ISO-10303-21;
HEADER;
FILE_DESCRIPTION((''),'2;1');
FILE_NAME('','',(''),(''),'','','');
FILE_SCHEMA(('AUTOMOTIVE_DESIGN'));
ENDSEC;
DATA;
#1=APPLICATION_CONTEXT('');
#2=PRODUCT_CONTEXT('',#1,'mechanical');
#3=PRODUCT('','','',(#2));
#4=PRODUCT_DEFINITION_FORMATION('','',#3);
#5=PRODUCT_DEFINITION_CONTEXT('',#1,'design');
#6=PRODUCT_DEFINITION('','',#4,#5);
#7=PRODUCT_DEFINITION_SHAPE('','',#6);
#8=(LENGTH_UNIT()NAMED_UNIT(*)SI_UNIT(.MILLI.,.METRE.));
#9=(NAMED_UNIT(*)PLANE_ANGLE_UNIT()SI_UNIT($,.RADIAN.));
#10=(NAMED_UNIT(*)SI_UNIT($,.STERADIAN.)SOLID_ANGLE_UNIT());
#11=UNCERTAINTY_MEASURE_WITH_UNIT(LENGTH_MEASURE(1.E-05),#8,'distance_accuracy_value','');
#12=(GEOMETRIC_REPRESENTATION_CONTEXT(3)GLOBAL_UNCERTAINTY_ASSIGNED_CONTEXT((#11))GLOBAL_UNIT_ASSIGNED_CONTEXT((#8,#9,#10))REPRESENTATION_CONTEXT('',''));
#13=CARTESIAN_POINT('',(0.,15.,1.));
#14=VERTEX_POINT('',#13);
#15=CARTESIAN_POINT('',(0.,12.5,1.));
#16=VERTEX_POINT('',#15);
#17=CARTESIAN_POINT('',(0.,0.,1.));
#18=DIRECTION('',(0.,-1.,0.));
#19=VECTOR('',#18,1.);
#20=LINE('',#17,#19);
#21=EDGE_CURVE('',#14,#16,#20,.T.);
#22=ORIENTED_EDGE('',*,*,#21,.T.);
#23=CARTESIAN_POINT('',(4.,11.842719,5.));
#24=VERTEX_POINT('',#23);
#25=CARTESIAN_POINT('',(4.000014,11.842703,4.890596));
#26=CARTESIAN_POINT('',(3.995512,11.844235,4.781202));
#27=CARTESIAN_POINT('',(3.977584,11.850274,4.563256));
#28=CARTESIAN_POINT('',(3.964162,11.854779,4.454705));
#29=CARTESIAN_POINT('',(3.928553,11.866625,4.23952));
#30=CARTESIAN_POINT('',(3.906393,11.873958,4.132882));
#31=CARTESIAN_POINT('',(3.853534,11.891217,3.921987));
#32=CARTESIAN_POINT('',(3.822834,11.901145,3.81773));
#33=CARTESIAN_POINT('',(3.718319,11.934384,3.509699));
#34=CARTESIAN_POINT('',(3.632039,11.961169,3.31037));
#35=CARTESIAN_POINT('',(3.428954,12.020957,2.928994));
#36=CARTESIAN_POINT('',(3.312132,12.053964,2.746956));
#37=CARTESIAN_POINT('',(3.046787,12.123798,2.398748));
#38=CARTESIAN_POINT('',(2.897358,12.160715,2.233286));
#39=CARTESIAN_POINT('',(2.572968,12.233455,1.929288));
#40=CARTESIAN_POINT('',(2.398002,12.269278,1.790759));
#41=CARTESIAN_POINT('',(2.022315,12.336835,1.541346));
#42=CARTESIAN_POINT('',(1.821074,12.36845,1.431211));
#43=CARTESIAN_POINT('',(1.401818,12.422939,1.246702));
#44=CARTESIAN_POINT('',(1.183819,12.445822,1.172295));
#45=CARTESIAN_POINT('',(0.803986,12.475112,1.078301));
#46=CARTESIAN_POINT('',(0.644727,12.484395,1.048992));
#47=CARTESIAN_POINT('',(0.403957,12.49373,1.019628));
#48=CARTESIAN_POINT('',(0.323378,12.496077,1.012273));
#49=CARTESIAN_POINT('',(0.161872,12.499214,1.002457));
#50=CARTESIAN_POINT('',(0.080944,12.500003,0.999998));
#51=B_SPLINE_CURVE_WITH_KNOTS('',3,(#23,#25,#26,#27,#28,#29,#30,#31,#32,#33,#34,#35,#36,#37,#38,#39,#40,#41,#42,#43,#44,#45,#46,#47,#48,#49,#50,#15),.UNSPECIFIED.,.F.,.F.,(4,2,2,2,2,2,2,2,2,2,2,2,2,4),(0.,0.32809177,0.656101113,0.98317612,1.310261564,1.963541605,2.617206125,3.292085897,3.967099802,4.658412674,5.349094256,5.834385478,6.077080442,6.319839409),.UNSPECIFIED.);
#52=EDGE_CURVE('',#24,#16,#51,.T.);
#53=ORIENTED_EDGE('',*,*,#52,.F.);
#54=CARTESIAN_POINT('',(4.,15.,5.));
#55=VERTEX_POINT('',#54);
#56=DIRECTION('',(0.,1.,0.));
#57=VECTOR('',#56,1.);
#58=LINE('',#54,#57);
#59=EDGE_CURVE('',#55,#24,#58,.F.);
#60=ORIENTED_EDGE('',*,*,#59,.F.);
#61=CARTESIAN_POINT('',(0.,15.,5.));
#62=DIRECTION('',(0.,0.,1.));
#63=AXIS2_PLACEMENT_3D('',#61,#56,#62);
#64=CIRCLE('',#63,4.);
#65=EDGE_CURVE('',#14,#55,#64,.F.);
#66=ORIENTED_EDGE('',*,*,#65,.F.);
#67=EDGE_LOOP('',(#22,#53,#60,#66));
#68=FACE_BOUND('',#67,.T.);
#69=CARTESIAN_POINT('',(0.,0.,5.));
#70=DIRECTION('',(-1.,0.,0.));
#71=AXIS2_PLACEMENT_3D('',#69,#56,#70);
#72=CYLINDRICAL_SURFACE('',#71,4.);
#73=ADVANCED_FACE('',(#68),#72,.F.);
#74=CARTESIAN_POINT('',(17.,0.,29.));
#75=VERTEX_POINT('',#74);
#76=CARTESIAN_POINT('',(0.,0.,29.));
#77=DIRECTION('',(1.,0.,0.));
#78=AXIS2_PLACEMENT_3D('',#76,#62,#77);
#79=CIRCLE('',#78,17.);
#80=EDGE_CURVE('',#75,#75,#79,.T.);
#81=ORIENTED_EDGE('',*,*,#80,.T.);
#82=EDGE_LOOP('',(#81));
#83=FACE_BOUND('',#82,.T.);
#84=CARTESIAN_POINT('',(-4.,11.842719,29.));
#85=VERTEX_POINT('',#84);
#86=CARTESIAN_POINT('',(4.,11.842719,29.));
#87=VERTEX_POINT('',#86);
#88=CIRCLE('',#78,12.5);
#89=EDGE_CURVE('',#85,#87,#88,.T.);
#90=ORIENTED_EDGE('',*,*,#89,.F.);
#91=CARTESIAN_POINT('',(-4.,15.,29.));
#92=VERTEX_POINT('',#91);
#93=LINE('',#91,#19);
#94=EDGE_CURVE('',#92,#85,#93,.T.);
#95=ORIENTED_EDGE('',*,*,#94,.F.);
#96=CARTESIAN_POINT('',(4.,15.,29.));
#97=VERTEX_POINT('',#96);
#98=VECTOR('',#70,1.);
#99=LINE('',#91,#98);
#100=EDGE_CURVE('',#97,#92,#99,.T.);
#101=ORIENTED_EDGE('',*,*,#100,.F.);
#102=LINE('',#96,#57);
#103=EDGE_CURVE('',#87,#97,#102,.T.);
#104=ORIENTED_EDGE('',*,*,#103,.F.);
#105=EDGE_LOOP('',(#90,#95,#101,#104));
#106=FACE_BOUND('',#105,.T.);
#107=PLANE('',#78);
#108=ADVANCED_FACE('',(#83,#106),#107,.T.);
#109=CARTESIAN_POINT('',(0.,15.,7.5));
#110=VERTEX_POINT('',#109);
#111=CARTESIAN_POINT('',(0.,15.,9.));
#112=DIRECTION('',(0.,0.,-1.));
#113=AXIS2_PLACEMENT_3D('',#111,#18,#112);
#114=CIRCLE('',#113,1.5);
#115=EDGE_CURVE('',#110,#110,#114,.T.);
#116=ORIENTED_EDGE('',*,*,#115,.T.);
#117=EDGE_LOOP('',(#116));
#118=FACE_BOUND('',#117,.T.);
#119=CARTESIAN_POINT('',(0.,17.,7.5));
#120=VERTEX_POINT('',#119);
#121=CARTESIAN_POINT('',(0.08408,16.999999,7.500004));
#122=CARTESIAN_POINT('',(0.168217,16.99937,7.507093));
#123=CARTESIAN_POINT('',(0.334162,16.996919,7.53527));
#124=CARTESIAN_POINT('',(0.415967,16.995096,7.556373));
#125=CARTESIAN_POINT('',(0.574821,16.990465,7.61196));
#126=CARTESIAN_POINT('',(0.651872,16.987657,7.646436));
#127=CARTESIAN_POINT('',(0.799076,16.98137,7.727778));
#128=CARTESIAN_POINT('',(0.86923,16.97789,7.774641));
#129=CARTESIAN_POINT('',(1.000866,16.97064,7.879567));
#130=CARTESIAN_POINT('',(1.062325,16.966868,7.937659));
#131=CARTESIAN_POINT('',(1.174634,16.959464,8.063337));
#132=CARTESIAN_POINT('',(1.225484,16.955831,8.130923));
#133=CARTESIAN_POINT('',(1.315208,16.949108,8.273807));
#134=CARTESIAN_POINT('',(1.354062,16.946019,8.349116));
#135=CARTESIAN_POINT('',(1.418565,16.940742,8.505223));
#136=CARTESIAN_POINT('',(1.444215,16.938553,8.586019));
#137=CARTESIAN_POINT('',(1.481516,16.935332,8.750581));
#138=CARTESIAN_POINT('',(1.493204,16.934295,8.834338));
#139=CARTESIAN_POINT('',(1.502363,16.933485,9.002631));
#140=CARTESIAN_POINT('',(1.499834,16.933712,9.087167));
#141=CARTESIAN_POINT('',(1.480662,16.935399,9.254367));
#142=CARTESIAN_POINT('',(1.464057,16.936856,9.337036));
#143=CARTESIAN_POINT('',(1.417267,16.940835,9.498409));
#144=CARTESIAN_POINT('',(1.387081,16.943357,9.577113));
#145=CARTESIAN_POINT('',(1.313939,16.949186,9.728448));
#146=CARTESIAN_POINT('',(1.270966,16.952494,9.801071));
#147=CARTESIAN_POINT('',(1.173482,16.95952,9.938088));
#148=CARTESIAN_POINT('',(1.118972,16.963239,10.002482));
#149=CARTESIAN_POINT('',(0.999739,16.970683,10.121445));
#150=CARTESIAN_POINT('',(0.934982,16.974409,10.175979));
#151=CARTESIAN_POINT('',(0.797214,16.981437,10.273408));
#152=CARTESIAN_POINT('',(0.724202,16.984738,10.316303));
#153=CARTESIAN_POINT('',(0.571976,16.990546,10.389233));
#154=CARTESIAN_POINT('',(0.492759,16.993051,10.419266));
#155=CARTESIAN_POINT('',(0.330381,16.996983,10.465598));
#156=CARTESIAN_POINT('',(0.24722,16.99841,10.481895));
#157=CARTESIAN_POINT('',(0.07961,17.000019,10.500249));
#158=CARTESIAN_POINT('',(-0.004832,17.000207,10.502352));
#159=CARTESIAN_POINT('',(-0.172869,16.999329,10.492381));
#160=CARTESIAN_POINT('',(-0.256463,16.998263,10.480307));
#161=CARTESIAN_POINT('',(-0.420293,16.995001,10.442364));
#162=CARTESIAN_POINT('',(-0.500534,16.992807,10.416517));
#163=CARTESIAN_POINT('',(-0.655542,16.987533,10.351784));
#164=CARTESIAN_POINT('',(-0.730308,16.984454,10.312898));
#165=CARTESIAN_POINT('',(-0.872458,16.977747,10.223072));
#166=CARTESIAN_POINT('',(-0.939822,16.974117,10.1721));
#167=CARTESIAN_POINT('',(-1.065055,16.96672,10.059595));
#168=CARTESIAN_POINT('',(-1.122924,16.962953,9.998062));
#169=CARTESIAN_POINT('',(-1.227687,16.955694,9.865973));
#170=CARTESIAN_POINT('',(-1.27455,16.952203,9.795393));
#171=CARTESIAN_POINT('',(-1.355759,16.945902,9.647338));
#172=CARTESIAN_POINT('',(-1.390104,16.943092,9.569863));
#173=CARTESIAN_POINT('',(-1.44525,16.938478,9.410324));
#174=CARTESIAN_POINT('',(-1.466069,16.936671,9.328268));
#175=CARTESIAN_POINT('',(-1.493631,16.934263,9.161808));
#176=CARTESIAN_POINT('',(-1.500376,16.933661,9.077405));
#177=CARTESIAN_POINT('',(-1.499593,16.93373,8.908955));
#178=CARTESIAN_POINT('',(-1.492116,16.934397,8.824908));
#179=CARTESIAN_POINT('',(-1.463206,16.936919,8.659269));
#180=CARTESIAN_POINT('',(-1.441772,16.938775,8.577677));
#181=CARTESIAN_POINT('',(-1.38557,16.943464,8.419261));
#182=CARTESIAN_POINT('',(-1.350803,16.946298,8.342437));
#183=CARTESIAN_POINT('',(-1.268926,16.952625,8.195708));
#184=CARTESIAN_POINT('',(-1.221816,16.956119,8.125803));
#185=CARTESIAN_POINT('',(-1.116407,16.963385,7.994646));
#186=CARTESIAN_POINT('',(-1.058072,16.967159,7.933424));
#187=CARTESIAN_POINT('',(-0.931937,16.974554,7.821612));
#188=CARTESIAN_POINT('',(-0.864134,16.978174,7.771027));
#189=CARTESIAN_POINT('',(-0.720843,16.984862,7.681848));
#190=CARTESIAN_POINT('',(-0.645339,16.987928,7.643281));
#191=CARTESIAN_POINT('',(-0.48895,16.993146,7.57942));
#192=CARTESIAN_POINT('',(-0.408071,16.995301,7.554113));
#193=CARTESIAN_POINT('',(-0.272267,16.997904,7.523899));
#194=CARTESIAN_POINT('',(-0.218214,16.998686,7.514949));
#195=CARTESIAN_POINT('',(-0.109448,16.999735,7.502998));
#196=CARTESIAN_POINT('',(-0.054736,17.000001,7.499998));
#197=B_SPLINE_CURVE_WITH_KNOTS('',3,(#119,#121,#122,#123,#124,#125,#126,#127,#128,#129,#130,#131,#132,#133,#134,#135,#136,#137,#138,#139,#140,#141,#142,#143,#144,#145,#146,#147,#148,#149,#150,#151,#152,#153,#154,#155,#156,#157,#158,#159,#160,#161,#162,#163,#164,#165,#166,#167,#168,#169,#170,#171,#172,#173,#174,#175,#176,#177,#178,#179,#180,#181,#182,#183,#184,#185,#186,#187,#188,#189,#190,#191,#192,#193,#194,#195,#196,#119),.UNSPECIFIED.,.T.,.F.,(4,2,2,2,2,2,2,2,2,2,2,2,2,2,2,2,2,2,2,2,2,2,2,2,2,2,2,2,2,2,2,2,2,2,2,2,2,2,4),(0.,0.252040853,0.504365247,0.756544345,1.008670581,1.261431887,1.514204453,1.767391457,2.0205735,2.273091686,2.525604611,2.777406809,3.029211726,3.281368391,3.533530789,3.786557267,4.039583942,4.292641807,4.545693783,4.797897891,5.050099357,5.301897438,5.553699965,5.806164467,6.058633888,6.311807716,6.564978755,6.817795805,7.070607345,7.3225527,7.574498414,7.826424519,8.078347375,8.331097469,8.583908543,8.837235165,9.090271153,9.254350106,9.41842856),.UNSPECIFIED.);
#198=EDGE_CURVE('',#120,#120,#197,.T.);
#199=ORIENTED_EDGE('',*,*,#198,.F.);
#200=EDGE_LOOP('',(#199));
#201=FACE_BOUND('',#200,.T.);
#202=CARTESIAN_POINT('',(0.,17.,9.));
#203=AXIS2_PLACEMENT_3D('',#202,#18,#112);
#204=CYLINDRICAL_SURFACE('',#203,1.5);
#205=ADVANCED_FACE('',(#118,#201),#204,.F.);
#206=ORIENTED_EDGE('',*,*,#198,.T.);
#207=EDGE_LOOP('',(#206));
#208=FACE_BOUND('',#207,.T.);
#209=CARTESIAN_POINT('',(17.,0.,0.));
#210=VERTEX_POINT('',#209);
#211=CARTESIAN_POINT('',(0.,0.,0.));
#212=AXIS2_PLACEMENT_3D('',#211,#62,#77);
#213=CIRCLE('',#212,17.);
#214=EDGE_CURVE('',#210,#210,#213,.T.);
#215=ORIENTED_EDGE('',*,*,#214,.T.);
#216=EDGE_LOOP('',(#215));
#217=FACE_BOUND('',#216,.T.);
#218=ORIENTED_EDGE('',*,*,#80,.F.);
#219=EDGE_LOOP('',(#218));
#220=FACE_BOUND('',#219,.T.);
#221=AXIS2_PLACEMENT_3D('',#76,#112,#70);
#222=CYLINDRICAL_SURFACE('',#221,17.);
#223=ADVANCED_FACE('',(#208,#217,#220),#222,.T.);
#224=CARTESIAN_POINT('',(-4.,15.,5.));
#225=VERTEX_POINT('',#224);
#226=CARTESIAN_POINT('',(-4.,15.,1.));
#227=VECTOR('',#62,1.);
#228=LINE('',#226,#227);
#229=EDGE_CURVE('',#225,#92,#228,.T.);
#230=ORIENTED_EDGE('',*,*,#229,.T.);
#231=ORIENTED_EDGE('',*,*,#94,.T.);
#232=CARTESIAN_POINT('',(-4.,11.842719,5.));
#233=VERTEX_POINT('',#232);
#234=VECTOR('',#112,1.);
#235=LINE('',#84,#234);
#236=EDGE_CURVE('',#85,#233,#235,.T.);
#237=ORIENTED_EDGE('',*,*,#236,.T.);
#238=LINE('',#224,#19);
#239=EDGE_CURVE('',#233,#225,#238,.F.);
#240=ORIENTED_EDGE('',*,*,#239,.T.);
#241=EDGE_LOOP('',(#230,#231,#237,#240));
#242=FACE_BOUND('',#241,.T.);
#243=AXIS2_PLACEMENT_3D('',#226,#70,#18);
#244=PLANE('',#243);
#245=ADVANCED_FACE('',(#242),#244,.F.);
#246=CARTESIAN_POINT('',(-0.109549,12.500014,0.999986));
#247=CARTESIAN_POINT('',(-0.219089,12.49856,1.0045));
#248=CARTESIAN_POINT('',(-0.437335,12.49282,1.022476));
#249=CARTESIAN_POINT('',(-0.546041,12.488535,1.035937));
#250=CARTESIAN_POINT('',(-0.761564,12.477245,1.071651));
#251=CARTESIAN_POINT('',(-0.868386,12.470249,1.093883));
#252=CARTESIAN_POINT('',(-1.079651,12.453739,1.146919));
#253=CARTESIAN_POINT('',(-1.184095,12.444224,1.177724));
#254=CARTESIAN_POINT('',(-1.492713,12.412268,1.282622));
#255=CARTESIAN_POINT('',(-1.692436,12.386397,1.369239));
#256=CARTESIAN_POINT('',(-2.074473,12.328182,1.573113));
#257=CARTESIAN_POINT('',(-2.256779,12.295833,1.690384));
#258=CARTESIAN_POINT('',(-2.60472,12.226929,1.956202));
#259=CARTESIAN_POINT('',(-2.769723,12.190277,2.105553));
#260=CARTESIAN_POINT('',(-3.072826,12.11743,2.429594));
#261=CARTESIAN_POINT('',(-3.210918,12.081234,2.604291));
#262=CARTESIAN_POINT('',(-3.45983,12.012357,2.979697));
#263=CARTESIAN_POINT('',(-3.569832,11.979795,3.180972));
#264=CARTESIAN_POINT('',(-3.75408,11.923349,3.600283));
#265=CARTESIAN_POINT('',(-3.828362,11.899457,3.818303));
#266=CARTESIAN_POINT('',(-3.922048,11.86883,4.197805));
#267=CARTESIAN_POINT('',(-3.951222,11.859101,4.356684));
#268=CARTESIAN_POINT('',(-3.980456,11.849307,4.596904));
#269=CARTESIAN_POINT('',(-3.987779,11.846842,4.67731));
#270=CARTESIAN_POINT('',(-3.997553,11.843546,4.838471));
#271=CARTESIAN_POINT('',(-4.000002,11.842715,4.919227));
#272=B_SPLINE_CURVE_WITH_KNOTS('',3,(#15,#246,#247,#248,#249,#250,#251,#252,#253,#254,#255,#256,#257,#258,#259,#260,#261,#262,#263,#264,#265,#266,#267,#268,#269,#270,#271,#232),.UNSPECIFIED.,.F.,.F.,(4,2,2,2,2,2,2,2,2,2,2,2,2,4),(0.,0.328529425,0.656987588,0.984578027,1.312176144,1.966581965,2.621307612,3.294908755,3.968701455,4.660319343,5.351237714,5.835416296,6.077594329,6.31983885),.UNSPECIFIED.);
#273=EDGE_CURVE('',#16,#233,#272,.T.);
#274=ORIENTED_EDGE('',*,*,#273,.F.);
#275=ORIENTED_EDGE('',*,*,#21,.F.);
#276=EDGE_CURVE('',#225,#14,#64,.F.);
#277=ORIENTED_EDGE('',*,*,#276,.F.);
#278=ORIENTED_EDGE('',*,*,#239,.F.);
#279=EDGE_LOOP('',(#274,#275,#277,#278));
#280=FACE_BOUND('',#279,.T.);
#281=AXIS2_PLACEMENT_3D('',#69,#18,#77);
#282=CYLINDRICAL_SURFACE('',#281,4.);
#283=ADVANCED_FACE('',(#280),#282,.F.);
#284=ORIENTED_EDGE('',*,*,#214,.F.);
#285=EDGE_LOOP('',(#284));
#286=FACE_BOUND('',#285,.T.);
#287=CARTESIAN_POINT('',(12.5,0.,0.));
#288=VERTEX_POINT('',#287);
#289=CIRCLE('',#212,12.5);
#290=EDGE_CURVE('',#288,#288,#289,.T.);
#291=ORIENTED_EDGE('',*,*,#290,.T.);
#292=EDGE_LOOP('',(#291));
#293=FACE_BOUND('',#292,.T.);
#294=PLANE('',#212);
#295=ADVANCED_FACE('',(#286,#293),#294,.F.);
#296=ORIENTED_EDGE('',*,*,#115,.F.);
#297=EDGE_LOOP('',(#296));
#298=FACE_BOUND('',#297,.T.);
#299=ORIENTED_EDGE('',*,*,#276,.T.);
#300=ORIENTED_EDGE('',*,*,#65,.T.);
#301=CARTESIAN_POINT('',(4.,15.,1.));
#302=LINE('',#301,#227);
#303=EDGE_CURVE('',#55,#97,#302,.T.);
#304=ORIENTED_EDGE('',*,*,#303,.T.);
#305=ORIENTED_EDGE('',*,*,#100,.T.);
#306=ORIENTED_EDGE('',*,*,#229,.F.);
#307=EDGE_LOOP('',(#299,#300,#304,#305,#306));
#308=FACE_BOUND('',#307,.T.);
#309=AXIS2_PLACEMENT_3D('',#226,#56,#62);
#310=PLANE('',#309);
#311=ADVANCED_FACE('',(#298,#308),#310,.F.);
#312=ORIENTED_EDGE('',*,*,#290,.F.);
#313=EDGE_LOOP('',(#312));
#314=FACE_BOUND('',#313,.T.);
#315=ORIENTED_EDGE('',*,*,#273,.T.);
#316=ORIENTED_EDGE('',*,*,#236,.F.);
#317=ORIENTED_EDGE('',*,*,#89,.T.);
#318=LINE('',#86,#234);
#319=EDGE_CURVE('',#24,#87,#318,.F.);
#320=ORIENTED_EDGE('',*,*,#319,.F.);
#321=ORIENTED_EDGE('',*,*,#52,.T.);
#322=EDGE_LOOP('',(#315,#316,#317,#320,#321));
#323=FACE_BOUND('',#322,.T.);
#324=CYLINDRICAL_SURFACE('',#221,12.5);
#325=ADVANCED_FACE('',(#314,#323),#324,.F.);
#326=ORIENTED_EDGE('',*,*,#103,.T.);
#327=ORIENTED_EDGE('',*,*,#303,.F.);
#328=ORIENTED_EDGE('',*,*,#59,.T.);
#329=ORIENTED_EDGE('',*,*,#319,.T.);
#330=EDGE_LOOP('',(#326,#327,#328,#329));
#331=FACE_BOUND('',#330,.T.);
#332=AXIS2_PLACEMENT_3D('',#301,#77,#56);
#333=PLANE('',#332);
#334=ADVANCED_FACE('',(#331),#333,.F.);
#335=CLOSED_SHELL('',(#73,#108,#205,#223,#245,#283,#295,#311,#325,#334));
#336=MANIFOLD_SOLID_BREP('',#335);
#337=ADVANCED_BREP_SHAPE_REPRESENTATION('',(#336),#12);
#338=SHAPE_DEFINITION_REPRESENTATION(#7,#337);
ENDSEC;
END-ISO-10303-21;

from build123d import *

# Parameters (mm, degrees)
SKETCH1_R           = 17
SKETCH1_R_2         = 12.5
BOSS_EXTRUDE1_DEPTH = 29
SKETCH2_W           = 8
SKETCH2_H           = 5
CUT_EXTRUDE2_DEPTH  = 28
FILLET3_R           = 4
FILLET4_R           = 4
SKETCH3_R           = 1.5
CUT_EXTRUDE4_DEPTH  = 47.411205606


with BuildPart() as part:
    # Sketch1 → Boss-Extrude1 (new body)
    with BuildSketch(Plane.XY):
        with Locations(Location((0, 0, 0), (0, 0, 180))):
            Circle(SKETCH1_R)
        with Locations(Location((0, 0, 0), (0, 0, 180))):
            Circle(SKETCH1_R_2, mode=Mode.SUBTRACT)
    extrude(amount=BOSS_EXTRUDE1_DEPTH)

    # Sketch2 → Cut-Extrude2 (cut)
    with BuildSketch(Plane.XY.offset(29)):
        with Locations((0, 12.5)):
            Rectangle(SKETCH2_W, SKETCH2_H)
    extrude(amount=-CUT_EXTRUDE2_DEPTH, mode=Mode.SUBTRACT)

    # Fillet3
    fillet3_edges = [part.edges().sort_by_distance(p)[0] for p in [
        (-4, 13.421359641, 1),
    ]]
    fillet(fillet3_edges, radius=FILLET3_R)

    # Fillet4
    fillet4_edges = [part.edges().sort_by_distance(p)[0] for p in [
        (4, 13.421359641, 1),
    ]]
    fillet(fillet4_edges, radius=FILLET4_R - 0.0001)  # a hair under: the kernel refuses the full size

    # Sketch3 → Cut-Extrude4 (cut, through all)
    with BuildSketch(Plane(origin=(0, 15, 0), x_dir=(-1, 0, 0), z_dir=(0, -1, 0))):
        with Locations(Location((0, -9, 0), (0, 0, 90))):
            Circle(SKETCH3_R)
    extrude(amount=-CUT_EXTRUDE4_DEPTH, mode=Mode.SUBTRACT)


solid = part.part
